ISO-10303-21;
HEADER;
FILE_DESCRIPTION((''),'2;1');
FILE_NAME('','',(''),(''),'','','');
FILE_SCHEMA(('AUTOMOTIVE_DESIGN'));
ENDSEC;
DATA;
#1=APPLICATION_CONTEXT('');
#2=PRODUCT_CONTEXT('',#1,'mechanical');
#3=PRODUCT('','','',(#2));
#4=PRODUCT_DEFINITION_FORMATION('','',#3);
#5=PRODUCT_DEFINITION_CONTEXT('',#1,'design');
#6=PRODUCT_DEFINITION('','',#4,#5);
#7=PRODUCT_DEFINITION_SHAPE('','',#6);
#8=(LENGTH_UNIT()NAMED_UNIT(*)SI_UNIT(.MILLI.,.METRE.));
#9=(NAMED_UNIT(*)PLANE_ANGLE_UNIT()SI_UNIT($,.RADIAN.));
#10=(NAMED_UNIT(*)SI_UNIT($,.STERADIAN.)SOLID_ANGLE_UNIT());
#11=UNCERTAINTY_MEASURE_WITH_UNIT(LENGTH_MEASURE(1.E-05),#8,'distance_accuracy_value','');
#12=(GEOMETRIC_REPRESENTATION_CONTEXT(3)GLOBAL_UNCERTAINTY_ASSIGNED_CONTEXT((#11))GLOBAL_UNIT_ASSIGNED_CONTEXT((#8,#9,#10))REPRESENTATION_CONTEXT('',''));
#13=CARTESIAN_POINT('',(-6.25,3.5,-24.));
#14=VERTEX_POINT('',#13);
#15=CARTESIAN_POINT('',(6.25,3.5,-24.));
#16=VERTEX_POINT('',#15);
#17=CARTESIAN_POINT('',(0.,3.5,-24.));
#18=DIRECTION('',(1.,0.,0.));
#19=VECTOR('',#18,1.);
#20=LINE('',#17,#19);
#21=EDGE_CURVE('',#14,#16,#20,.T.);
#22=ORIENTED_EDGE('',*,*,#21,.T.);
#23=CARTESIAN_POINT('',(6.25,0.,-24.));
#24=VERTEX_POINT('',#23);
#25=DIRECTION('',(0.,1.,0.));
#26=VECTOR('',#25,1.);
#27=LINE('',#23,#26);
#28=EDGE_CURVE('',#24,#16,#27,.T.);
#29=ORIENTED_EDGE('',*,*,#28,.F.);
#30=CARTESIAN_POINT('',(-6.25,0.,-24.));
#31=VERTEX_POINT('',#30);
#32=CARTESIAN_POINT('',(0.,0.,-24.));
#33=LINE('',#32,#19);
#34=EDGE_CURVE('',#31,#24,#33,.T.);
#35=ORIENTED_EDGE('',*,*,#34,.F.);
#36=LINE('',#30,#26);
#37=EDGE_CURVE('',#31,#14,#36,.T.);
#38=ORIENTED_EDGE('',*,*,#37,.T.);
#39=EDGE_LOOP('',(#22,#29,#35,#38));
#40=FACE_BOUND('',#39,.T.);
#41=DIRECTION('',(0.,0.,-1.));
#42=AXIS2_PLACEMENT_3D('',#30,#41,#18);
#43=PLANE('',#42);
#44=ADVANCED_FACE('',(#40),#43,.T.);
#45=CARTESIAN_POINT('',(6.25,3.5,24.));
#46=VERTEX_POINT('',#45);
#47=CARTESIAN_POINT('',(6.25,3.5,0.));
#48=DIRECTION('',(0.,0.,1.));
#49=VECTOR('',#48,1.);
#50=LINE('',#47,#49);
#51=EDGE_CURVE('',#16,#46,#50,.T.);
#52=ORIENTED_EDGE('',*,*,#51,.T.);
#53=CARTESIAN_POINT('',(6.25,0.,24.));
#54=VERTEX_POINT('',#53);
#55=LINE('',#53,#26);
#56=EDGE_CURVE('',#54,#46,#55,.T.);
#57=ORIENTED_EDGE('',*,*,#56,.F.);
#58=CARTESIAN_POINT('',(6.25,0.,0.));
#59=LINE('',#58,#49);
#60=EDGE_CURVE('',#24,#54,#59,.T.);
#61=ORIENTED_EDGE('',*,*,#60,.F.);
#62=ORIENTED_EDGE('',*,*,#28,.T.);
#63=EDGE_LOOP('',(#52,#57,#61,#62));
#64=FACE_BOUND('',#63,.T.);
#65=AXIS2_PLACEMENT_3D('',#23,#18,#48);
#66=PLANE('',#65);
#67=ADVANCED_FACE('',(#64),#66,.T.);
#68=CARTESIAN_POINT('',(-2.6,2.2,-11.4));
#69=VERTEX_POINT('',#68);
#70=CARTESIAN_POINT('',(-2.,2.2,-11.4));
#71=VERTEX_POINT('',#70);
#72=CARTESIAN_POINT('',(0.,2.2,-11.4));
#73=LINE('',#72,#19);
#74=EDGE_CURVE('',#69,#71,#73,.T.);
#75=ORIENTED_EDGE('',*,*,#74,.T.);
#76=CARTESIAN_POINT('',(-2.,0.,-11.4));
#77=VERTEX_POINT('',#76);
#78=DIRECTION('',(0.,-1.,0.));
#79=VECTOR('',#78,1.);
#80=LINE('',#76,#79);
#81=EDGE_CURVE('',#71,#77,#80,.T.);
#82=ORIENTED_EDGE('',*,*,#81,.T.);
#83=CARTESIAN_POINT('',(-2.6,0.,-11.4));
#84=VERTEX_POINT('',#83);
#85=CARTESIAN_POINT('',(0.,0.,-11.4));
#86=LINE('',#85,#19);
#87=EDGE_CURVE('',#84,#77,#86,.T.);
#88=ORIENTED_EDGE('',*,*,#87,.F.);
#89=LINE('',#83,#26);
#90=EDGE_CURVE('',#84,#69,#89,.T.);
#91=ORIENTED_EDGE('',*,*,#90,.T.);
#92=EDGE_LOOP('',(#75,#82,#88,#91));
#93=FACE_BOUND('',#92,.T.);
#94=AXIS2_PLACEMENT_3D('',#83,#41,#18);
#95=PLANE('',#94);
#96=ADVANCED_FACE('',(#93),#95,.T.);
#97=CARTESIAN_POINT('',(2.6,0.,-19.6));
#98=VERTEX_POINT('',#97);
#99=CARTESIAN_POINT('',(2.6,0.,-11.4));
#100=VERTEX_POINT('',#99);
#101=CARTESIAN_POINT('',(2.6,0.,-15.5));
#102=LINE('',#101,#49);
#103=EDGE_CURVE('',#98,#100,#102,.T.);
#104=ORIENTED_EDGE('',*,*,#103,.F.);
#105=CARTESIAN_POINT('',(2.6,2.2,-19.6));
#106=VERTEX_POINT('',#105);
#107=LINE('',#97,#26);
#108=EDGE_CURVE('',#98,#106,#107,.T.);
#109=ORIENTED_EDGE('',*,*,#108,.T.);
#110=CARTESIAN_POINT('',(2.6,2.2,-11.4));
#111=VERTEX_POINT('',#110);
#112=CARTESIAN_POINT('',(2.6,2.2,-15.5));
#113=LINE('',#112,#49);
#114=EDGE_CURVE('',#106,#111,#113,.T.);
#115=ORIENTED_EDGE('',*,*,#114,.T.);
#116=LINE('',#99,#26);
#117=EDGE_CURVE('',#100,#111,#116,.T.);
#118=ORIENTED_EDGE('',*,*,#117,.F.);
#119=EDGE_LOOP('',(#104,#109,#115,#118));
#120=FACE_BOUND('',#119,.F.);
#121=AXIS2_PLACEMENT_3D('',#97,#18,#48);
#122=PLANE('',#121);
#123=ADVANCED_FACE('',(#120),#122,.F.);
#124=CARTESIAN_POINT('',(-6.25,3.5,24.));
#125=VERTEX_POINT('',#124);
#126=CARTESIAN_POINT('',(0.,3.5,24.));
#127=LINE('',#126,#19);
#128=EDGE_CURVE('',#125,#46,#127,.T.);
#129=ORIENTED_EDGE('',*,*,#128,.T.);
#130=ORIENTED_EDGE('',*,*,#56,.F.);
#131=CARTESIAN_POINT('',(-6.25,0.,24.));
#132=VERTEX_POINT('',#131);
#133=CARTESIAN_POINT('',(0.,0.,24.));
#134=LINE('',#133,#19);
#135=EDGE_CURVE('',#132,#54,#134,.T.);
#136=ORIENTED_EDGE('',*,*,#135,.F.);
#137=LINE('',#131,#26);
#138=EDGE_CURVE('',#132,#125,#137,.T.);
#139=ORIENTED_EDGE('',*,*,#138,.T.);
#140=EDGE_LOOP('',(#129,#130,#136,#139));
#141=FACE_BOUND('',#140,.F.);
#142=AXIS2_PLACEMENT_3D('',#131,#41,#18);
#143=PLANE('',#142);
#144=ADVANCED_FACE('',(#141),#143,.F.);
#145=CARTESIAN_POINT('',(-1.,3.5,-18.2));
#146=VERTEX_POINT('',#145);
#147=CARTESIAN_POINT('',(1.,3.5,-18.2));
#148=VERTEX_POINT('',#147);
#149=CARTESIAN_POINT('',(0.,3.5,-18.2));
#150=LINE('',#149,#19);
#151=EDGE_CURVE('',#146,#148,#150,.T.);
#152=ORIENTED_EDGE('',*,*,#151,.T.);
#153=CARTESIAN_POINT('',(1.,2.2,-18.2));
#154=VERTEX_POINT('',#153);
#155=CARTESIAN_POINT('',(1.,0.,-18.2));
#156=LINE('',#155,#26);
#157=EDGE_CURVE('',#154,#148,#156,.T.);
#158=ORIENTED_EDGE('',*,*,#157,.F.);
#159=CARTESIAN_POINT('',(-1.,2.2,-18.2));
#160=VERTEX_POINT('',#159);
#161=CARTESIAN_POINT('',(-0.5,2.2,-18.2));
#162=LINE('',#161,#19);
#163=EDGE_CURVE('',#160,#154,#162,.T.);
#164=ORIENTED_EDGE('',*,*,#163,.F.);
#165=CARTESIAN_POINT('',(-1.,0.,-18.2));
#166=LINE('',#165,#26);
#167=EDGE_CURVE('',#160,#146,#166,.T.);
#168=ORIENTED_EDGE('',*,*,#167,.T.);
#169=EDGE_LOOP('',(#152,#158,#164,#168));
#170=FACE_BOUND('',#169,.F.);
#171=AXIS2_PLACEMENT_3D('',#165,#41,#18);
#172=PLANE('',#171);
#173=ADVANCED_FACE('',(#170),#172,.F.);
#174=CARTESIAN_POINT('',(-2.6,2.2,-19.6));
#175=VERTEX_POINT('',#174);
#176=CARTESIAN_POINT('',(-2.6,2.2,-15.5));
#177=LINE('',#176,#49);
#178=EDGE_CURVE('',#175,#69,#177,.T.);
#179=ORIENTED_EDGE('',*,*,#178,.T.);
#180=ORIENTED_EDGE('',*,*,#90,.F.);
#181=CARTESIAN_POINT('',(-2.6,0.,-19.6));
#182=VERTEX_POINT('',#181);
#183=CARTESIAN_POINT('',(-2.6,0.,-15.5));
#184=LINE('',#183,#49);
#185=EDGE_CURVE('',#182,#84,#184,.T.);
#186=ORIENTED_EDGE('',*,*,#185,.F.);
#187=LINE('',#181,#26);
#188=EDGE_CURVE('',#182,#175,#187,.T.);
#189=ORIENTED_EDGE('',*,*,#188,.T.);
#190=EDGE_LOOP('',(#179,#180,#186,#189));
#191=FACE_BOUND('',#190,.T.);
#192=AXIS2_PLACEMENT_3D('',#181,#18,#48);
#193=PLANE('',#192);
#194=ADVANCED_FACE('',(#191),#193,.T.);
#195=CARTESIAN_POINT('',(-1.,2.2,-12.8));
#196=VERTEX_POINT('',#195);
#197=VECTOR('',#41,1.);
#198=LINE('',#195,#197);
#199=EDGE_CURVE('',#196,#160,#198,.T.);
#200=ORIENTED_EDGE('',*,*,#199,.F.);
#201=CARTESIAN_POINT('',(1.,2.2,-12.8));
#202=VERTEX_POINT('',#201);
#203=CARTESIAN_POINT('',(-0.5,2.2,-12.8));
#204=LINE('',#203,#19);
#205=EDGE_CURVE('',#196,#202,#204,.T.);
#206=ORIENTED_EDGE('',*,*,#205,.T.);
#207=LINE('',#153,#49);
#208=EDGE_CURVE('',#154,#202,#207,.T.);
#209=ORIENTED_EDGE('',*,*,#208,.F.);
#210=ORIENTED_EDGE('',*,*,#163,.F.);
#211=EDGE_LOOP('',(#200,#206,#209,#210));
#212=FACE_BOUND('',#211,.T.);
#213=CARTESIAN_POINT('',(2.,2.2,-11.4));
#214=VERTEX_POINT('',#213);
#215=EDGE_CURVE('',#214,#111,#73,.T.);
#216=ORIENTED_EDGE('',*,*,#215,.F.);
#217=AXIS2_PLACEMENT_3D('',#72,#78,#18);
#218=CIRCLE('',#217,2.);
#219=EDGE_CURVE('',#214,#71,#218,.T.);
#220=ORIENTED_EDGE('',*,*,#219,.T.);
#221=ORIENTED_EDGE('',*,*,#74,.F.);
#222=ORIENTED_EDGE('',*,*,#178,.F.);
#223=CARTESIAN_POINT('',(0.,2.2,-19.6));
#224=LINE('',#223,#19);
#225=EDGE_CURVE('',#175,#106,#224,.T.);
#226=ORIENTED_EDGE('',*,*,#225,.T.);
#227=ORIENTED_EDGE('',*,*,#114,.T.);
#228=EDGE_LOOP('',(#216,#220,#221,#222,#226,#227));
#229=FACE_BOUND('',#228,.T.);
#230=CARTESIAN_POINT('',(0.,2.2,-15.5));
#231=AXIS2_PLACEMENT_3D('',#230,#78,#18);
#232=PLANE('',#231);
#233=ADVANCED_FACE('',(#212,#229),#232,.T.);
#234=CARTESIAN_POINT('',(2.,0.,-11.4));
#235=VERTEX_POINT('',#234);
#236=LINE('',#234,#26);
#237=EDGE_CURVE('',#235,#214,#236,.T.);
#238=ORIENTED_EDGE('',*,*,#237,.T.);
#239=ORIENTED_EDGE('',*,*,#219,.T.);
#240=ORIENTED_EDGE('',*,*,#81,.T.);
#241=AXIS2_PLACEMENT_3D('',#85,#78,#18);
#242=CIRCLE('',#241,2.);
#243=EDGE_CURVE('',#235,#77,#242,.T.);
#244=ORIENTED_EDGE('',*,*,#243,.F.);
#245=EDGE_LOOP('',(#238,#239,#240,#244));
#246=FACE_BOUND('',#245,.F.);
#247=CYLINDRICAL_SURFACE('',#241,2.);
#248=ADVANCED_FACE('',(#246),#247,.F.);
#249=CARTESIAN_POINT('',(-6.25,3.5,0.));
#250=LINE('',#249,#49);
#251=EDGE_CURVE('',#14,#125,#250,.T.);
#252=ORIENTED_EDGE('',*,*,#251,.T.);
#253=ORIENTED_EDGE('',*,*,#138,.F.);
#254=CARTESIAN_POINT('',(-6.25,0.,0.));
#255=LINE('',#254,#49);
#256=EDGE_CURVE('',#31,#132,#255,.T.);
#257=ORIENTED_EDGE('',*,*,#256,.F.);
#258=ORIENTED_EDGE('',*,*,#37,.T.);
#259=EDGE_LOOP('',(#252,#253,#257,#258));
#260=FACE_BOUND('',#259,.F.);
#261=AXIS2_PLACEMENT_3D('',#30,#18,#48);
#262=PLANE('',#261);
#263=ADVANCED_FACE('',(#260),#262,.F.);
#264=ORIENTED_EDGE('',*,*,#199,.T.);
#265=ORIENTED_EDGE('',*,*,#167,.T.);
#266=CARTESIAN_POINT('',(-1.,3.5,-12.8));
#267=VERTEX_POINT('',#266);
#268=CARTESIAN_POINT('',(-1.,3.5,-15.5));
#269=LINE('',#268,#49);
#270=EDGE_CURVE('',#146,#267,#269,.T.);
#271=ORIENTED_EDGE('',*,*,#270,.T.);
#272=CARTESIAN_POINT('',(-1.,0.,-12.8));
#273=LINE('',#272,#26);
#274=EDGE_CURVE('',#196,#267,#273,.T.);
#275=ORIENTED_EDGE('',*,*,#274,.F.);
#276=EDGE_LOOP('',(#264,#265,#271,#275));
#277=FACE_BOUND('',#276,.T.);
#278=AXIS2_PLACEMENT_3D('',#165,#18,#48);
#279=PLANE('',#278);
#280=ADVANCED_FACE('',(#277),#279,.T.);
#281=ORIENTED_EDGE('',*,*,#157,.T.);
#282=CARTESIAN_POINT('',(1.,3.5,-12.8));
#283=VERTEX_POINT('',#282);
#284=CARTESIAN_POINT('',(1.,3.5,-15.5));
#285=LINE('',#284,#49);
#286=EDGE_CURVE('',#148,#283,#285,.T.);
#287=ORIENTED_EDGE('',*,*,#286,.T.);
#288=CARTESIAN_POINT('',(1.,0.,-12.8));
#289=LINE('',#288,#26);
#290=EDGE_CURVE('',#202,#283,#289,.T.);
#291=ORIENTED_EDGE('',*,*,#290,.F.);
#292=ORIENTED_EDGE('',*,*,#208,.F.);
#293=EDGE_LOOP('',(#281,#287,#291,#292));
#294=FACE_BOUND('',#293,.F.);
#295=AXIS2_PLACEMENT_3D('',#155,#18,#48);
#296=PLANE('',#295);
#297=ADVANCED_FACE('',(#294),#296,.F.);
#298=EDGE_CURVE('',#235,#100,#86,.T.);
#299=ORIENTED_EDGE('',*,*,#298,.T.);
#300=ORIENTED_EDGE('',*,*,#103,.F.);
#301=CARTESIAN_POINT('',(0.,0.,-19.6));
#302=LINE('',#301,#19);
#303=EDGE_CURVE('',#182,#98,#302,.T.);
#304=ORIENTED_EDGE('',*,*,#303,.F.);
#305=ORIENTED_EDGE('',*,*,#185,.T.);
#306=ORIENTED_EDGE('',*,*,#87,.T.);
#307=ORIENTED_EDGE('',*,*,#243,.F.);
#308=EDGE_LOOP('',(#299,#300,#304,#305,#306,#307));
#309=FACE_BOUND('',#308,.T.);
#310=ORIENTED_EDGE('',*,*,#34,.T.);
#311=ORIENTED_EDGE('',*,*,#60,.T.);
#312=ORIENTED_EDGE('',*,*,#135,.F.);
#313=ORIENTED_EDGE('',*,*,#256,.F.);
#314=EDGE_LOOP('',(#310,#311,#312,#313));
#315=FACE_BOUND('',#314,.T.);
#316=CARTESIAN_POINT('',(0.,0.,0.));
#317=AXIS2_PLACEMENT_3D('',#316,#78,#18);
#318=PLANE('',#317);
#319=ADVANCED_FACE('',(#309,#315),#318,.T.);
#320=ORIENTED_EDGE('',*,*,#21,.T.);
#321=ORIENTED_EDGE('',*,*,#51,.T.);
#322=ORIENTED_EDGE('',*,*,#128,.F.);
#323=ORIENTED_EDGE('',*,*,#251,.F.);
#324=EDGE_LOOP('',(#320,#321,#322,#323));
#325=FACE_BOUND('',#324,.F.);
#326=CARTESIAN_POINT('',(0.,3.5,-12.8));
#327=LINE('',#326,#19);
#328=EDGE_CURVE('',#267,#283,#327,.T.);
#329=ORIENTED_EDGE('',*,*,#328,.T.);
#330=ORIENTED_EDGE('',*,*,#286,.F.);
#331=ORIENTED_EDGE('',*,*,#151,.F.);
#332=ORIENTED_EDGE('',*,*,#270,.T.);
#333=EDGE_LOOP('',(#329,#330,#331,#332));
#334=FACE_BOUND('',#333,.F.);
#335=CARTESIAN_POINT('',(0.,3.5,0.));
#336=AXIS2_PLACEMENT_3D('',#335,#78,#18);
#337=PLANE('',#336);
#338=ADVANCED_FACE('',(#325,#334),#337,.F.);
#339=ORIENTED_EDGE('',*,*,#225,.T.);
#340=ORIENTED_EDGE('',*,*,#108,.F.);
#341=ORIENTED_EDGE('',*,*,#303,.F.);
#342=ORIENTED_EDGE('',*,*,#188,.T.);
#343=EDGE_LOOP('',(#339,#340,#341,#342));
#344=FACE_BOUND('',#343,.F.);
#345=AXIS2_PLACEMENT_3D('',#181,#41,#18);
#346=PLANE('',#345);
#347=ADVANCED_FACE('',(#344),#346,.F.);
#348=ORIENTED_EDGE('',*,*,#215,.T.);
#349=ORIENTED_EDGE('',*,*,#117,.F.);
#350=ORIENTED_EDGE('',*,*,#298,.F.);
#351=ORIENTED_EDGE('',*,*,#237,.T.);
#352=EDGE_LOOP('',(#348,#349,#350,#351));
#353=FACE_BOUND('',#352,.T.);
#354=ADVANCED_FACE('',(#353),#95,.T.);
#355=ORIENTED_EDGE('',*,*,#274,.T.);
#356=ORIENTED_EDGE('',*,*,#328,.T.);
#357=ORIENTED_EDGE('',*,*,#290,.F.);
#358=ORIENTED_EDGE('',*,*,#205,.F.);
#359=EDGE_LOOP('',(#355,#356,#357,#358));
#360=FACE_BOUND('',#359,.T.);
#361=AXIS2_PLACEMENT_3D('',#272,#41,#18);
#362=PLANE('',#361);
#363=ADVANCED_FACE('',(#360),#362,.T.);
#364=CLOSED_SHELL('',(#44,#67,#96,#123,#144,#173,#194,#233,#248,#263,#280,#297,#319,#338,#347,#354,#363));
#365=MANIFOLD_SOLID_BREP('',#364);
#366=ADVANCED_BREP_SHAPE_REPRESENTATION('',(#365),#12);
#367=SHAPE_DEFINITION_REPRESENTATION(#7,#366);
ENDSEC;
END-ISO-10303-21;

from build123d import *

# Parameters (mm, degrees)
F0_W     = 12.5
F0_H     = 48
F1_DEPTH = 3.5
F2_W     = 5.2
F2_H     = 8.2
F3_DEPTH = 2.2
F4_W     = 2
F4_H     = 5.4
F5_DEPTH = 3.5
F6_R     = 2
F7_DEPTH = 2.2


# Not quite as in the source:
# - a feature names something its author has since deleted; it is built from what else it names


with BuildPart() as f1:
    # F0 (on Front) → F1 (new body)
    with BuildSketch(Plane.XZ):
        Rectangle(F0_W, F0_H)
    extrude(amount=-F1_DEPTH)

    # F2 (on Front) → F3 (cut)
    with BuildSketch(Plane.XZ):
        with Locations((0, -15.5)):
            Rectangle(F2_W, F2_H)
    extrude(amount=-F3_DEPTH, mode=Mode.SUBTRACT)

    # F4 (on Front) → F5 (cut)
    with BuildSketch(Plane.XZ):
        with Locations((0, -15.5)):
            Rectangle(F4_W, F4_H)
    extrude(amount=-F5_DEPTH, mode=Mode.SUBTRACT)

    # F6 (on Front) → F7 (cut)
    with BuildSketch(Plane.XZ):
        with Locations((0, -11.4)):
            Circle(F6_R)
    extrude(amount=-F7_DEPTH, mode=Mode.SUBTRACT)


solid = f1.part
